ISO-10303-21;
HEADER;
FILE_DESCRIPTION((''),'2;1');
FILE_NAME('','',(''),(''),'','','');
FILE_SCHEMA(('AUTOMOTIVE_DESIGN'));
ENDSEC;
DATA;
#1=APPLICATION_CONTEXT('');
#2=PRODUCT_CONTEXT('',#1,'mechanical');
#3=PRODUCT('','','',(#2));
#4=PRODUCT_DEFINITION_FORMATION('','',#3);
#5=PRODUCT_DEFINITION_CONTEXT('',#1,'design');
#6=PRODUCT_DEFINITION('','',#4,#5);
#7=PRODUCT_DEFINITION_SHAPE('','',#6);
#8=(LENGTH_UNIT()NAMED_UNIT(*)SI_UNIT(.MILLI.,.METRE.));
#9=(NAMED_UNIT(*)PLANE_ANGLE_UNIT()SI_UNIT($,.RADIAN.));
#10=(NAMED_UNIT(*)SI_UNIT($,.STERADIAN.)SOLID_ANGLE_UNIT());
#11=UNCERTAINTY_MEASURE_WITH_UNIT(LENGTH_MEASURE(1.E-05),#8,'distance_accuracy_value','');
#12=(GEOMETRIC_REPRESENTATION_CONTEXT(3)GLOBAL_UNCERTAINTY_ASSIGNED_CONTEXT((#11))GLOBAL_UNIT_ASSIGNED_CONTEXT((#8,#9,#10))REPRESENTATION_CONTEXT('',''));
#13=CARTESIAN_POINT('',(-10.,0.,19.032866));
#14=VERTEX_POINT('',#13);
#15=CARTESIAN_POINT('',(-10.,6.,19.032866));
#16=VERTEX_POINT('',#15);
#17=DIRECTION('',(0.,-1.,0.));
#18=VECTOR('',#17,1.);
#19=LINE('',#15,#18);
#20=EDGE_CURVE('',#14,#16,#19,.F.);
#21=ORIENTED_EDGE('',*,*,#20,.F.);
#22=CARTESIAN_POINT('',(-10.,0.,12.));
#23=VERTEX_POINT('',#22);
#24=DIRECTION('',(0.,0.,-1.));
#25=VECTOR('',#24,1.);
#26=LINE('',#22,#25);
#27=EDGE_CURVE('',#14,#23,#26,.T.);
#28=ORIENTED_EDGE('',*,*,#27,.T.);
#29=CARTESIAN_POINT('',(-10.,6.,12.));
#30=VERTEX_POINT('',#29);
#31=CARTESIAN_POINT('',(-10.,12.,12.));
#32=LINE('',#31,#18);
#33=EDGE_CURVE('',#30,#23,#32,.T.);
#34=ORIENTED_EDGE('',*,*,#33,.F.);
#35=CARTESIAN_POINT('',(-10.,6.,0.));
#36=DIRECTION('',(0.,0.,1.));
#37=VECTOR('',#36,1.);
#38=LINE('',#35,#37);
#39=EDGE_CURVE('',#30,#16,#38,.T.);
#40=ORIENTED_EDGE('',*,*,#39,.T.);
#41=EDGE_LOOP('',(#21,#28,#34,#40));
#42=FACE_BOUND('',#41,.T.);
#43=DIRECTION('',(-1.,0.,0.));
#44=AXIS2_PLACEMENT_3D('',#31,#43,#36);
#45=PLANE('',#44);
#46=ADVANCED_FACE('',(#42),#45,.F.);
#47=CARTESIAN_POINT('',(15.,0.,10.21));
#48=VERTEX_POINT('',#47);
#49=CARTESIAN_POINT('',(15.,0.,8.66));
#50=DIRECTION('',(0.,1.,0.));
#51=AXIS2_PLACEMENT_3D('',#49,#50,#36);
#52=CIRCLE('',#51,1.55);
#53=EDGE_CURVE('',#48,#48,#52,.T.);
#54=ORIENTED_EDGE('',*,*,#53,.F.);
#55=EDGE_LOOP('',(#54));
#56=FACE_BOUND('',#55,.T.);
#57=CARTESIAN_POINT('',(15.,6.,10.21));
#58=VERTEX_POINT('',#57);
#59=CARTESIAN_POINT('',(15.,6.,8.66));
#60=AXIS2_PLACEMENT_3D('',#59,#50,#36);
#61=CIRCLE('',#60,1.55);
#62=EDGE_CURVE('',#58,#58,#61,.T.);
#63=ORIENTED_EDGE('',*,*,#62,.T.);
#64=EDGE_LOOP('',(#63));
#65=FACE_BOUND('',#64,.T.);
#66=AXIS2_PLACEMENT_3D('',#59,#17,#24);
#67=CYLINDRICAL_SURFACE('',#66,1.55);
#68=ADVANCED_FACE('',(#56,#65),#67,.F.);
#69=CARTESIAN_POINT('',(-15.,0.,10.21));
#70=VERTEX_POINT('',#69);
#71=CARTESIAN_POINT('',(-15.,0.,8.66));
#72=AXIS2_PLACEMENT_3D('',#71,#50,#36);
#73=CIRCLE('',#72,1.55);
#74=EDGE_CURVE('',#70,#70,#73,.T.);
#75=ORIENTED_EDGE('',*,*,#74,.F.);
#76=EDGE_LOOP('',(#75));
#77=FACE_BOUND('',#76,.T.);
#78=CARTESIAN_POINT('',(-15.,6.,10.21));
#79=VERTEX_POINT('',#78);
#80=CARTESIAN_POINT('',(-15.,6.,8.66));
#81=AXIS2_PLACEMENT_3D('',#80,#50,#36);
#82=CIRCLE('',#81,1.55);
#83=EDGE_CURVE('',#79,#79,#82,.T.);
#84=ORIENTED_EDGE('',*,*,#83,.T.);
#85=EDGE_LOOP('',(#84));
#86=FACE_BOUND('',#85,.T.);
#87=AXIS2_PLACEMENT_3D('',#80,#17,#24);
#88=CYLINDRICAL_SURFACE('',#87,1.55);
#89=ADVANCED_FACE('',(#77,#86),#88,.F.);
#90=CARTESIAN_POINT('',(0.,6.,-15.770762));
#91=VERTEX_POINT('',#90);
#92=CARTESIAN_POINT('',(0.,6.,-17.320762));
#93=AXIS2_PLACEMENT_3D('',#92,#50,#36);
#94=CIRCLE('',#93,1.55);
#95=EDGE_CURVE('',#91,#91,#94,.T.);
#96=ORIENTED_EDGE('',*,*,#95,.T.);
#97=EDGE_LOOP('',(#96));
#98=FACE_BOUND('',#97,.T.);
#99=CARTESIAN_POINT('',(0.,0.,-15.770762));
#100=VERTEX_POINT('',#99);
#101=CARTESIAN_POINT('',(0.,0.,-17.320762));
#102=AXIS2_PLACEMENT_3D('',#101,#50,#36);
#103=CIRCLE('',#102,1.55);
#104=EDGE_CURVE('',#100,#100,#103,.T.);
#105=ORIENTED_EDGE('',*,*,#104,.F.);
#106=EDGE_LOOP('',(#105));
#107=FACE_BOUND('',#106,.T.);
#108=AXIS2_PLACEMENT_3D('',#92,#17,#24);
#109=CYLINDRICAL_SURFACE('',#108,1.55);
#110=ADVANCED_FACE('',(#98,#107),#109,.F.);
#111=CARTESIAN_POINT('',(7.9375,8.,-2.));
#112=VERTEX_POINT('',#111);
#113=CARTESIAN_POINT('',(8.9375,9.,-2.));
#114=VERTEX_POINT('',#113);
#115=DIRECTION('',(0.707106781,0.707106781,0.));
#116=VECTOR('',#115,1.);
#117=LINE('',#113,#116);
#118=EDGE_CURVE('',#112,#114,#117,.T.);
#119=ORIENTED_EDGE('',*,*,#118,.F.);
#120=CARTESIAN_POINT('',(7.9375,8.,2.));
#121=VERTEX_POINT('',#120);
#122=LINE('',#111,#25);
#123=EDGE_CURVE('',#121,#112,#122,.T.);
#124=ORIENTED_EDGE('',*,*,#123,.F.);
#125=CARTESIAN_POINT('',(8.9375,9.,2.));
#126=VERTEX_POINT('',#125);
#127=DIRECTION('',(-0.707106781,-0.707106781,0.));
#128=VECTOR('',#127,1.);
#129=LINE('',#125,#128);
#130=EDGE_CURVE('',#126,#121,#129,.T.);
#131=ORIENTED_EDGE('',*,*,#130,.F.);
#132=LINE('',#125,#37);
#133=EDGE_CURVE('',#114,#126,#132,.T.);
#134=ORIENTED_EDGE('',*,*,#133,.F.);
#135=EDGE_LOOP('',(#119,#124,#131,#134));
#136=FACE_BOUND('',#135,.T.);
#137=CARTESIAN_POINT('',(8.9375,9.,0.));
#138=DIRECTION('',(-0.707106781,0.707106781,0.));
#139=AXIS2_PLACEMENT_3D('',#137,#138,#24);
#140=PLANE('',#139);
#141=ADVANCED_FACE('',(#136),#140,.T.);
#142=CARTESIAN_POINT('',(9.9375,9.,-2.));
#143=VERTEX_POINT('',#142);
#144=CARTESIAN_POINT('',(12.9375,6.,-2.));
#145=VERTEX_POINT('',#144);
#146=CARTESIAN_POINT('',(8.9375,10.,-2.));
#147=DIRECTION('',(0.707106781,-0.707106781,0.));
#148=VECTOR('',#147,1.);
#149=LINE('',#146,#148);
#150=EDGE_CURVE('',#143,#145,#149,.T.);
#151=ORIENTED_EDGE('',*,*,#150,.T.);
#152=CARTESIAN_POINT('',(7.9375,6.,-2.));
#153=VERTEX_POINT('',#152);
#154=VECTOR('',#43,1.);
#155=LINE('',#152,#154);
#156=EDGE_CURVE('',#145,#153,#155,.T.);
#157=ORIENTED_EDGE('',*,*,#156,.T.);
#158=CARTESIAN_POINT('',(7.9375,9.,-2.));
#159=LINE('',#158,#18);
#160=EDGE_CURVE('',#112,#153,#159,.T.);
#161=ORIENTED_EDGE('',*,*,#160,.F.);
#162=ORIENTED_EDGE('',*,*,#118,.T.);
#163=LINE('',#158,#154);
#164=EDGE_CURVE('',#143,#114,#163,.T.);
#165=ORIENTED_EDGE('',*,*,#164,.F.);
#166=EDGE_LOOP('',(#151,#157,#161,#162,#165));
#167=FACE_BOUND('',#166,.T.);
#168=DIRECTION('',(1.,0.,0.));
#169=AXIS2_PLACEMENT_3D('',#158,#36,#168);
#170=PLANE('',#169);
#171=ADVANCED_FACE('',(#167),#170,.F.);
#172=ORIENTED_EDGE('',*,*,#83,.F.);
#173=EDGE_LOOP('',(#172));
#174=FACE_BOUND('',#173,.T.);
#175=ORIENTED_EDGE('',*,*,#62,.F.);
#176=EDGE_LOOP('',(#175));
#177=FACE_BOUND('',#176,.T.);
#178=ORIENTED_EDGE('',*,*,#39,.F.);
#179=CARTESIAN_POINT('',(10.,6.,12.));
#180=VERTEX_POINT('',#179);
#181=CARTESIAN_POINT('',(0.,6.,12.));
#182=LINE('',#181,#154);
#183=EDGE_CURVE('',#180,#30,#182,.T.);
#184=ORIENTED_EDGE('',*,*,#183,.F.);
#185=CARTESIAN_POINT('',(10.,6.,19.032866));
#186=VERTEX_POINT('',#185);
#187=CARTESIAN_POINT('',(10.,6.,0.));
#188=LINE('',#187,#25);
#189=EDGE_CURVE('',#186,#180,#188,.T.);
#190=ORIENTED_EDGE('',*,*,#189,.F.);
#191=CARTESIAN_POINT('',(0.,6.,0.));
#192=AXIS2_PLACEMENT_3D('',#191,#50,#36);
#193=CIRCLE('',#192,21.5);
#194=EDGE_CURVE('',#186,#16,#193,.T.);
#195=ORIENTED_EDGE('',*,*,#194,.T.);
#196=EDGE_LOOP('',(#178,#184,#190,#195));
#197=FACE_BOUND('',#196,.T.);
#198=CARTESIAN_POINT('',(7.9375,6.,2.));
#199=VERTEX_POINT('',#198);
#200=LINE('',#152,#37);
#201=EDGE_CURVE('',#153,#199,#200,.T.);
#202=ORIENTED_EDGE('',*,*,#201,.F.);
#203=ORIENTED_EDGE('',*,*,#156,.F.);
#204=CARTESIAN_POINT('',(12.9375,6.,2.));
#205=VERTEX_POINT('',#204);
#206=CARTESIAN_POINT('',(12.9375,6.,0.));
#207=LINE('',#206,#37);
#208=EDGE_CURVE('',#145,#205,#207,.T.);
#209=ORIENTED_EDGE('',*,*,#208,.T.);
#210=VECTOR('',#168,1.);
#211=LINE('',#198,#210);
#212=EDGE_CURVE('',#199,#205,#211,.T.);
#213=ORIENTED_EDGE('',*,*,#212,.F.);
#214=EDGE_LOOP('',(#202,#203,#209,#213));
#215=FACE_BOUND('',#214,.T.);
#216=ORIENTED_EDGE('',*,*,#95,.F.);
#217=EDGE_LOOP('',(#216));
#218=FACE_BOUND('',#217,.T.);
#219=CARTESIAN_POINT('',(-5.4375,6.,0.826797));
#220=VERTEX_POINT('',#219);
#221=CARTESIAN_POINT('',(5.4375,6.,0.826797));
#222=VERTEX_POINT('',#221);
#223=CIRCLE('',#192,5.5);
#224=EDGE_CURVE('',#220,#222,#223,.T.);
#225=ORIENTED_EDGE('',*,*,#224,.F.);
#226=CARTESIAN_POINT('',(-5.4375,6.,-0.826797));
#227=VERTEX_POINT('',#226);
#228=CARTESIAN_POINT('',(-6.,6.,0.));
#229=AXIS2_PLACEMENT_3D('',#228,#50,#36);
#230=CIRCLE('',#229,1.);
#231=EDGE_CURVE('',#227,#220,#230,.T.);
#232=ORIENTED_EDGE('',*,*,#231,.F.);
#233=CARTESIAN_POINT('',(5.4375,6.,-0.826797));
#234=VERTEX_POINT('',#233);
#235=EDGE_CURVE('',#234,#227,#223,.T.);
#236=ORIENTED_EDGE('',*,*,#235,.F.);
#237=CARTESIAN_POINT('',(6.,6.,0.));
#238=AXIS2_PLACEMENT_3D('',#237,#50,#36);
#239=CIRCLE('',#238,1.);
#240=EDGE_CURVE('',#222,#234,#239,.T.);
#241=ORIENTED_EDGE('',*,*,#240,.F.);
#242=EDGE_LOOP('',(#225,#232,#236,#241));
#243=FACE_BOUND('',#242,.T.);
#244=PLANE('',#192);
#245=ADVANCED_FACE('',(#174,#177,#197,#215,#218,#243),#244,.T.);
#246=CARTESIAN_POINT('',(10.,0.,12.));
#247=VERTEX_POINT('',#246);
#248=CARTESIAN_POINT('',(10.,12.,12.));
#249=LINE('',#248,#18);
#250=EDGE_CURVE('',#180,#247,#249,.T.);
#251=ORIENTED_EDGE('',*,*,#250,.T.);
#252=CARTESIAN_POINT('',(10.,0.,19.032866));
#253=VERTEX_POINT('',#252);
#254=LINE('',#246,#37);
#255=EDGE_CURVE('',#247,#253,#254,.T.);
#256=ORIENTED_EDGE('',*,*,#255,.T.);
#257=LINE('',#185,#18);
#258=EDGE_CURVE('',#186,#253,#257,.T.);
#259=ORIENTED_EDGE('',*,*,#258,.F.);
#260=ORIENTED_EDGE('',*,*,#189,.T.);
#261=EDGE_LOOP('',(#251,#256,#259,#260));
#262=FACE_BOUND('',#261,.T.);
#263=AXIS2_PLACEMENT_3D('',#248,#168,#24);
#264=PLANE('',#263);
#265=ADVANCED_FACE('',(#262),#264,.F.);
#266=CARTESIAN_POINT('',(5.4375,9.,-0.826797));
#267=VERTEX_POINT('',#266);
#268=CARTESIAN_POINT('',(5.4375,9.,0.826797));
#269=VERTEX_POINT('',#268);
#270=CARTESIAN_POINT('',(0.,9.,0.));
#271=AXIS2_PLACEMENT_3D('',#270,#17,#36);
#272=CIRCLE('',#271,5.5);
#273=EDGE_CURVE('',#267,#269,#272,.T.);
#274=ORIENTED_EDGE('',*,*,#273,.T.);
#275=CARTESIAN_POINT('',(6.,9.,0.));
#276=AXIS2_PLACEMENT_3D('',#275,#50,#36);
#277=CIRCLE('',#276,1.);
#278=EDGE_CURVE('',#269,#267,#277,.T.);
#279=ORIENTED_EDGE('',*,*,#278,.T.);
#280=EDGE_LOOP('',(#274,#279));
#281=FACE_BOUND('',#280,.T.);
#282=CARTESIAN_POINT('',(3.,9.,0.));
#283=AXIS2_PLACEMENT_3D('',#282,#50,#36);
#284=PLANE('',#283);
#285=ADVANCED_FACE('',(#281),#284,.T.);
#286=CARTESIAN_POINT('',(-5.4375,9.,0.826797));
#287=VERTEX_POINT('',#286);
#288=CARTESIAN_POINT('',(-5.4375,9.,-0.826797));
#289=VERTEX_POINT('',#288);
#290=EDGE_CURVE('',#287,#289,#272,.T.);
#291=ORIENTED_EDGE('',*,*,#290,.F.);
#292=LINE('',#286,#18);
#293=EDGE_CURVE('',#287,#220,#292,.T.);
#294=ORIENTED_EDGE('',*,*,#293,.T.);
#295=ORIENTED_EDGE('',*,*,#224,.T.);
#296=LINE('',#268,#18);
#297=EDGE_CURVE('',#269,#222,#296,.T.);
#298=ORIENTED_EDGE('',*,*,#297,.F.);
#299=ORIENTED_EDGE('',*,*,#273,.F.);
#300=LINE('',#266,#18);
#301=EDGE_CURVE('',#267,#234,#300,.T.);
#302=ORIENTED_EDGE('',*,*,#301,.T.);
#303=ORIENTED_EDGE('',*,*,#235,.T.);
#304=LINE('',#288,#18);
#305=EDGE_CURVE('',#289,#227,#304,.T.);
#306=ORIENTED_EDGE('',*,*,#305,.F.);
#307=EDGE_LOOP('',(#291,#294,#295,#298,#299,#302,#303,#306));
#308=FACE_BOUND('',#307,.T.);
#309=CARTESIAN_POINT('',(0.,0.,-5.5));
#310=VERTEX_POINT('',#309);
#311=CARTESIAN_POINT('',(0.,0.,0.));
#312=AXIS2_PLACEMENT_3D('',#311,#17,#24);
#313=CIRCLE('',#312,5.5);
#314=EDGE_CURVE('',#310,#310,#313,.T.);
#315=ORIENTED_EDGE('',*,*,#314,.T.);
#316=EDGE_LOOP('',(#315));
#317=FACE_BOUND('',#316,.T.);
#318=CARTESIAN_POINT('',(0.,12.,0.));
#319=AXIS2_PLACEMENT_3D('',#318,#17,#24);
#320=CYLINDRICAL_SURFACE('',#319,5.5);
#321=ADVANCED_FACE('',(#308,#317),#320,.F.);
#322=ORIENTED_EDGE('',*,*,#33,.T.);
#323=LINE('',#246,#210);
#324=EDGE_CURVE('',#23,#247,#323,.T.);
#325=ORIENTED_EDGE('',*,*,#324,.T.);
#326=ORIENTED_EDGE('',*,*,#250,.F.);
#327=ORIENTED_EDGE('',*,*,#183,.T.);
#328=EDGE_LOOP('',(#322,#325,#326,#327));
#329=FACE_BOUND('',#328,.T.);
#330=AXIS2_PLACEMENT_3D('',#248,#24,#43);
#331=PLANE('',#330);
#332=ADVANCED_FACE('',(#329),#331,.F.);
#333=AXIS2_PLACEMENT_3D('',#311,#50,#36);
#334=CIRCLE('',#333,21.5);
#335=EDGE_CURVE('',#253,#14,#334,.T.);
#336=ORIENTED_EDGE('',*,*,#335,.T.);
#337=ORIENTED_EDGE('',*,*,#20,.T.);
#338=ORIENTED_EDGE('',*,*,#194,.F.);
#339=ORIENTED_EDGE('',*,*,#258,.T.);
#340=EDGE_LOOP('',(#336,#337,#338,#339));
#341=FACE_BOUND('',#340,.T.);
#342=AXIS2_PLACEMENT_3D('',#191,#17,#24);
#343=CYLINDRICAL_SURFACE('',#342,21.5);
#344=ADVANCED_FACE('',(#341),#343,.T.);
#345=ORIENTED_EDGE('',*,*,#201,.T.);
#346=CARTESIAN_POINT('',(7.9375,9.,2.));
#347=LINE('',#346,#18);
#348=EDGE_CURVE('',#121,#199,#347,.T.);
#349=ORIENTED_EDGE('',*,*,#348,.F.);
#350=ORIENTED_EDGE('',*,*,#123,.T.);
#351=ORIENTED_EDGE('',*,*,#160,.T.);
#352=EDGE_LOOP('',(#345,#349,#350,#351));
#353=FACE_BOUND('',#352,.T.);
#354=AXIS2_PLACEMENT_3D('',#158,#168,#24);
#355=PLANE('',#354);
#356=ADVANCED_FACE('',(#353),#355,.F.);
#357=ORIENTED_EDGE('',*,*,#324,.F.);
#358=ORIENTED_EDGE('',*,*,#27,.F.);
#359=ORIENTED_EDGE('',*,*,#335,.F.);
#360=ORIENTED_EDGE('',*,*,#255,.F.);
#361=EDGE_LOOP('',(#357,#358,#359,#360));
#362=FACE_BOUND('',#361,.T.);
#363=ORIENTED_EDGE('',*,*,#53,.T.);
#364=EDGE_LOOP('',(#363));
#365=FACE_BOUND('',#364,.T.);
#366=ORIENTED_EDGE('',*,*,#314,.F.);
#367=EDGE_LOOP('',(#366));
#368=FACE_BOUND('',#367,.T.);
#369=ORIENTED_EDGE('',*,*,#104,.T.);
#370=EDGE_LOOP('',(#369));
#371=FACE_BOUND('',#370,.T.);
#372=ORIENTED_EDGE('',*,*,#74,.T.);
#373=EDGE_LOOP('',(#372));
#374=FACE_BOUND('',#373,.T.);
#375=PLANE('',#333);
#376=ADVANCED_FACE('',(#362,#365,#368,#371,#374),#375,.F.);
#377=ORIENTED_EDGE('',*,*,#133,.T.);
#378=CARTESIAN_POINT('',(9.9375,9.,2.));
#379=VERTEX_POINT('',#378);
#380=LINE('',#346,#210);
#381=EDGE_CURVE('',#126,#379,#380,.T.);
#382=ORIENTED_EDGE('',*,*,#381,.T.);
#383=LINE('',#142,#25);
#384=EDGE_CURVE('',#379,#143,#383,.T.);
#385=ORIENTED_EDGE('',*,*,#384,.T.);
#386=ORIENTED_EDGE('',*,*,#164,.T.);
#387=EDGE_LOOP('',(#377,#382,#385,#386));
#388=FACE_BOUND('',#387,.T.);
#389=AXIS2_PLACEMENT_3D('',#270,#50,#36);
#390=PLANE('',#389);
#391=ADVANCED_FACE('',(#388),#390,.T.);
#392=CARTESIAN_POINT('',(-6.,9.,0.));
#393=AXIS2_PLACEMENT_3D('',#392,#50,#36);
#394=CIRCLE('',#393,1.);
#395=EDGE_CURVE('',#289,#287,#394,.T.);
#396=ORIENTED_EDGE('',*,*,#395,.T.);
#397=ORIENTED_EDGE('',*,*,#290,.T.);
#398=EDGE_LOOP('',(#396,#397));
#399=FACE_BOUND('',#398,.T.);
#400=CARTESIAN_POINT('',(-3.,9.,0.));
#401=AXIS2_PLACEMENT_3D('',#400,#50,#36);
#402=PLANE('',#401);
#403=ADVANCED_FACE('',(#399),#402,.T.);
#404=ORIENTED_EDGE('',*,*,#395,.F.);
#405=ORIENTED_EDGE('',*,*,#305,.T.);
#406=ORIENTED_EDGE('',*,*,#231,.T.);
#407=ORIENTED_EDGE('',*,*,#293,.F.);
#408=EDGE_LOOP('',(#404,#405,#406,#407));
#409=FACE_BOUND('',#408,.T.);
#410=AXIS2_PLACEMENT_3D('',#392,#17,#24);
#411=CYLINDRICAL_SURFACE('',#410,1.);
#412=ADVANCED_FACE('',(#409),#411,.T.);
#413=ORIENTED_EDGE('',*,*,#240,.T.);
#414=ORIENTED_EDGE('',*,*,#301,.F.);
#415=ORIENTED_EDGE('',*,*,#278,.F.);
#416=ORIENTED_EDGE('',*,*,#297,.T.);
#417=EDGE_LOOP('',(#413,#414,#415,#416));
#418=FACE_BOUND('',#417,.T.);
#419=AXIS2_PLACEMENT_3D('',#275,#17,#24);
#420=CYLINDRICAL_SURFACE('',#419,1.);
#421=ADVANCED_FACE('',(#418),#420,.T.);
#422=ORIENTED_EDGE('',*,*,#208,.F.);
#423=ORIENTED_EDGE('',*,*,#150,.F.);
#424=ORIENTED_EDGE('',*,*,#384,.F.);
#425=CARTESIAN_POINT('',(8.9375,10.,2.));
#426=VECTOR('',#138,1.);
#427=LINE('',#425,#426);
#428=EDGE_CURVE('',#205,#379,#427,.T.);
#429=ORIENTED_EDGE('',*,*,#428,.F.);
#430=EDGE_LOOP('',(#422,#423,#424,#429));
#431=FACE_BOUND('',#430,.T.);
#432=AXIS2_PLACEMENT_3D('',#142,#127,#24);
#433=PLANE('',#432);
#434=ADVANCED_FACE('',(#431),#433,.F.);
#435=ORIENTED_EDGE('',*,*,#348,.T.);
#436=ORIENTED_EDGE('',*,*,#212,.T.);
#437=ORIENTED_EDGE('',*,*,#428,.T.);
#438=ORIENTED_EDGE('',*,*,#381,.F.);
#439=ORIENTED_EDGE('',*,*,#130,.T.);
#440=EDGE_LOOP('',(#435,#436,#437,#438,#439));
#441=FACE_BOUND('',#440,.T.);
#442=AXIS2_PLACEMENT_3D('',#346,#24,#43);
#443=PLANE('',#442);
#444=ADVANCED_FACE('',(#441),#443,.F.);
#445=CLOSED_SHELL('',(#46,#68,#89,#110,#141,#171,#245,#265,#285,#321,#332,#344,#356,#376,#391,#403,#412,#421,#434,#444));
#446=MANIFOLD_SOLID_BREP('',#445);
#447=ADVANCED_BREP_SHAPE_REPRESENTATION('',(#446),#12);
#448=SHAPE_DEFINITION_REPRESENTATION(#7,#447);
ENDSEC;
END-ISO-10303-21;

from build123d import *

# Parameters (mm, degrees)
SKETCH1_R           = 21.5
SKETCH1_R_2         = 1.55
BOSS_EXTRUDE1_DEPTH = 6
SKETCH2_R           = 5.5
SKETCH2_W           = 20
SKETCH2_H           = 10
CUT_EXTRUDE1_DEPTH  = 12
BOSS_EXTRUDE2_DEPTH = 3
SKETCH4_W           = 2
SKETCH4_H           = 4
BOSS_EXTRUDE3_DEPTH = 3
CHAMFER1_SIZE       = 1
CHAMFER2_SIZE       = 3


with BuildPart() as part:
    # Sketch1 → Boss-Extrude1 (new body)
    with BuildSketch(Plane(origin=(0, 0, 0), x_dir=(1, 0, 0), z_dir=(0, 1, 0))):
        with Locations(Location((0, 0, 0), (0, 0, 270))):
            Circle(SKETCH1_R)
        with Locations(Location((0, 17.320762114, 0), (0, 0, 270))):
            Circle(SKETCH1_R_2, mode=Mode.SUBTRACT)
        with Locations(Location((15, -8.66, 0), (0, 0, 270))):
            Circle(SKETCH1_R_2, mode=Mode.SUBTRACT)
        with Locations(Location((-15, -8.66, 0), (0, 0, 270))):
            Circle(SKETCH1_R_2, mode=Mode.SUBTRACT)
    extrude(amount=BOSS_EXTRUDE1_DEPTH)

    # Sketch2 → Cut-Extrude1 (cut)
    with BuildSketch(Plane(origin=(0, 0, 0), x_dir=(-1, 0, 0), z_dir=(0, -1, 0))):
        with Locations(Location((0, 0, 0), (0, 0, 90))):
            Circle(SKETCH2_R)
        with Locations((0, -17)):
            Rectangle(SKETCH2_W, SKETCH2_H)
    extrude(amount=-CUT_EXTRUDE1_DEPTH, mode=Mode.SUBTRACT)

    # Sketch3 → Boss-Extrude2 (add)
    with BuildSketch(Plane(origin=(0, 6, 0), x_dir=(1, 0, 0), z_dir=(0, 1, 0))):
        with BuildLine():
            ThreePointArc((-5.4375, 0.826797285), (-7, 0), (-5.4375, -0.826797285))
            ThreePointArc((-5.4375, -0.826797285), (-5.5, 0), (-5.4375, 0.826797285))
        make_face()
        with BuildLine():
            ThreePointArc((5.4375, -0.826797285), (7, 0), (5.4375, 0.826797285))
            ThreePointArc((5.4375, 0.826797285), (5.5, 0), (5.4375, -0.826797285))
        make_face()
    extrude(amount=BOSS_EXTRUDE2_DEPTH)

    # Sketch4 → Boss-Extrude3 (add)
    with BuildSketch(Plane(origin=(0, 6, 0), x_dir=(1, 0, 0), z_dir=(0, 1, 0))):
        with Locations((8.9375, 0)):
            Rectangle(SKETCH4_W, SKETCH4_H)
    extrude(amount=BOSS_EXTRUDE3_DEPTH)

    # Chamfer1
    chamfer1_edges = [part.edges().sort_by_distance(p)[0] for p in [
        (7.9375, 9, 0),
    ]]
    chamfer(chamfer1_edges, length=CHAMFER1_SIZE)

    # Chamfer2
    chamfer2_edges = [part.edges().sort_by_distance(p)[0] for p in [
        (9.9375, 6, 0),
    ]]
    chamfer(chamfer2_edges, length=CHAMFER2_SIZE - 0.0001)  # a hair under: the kernel refuses the full size


solid = part.part
